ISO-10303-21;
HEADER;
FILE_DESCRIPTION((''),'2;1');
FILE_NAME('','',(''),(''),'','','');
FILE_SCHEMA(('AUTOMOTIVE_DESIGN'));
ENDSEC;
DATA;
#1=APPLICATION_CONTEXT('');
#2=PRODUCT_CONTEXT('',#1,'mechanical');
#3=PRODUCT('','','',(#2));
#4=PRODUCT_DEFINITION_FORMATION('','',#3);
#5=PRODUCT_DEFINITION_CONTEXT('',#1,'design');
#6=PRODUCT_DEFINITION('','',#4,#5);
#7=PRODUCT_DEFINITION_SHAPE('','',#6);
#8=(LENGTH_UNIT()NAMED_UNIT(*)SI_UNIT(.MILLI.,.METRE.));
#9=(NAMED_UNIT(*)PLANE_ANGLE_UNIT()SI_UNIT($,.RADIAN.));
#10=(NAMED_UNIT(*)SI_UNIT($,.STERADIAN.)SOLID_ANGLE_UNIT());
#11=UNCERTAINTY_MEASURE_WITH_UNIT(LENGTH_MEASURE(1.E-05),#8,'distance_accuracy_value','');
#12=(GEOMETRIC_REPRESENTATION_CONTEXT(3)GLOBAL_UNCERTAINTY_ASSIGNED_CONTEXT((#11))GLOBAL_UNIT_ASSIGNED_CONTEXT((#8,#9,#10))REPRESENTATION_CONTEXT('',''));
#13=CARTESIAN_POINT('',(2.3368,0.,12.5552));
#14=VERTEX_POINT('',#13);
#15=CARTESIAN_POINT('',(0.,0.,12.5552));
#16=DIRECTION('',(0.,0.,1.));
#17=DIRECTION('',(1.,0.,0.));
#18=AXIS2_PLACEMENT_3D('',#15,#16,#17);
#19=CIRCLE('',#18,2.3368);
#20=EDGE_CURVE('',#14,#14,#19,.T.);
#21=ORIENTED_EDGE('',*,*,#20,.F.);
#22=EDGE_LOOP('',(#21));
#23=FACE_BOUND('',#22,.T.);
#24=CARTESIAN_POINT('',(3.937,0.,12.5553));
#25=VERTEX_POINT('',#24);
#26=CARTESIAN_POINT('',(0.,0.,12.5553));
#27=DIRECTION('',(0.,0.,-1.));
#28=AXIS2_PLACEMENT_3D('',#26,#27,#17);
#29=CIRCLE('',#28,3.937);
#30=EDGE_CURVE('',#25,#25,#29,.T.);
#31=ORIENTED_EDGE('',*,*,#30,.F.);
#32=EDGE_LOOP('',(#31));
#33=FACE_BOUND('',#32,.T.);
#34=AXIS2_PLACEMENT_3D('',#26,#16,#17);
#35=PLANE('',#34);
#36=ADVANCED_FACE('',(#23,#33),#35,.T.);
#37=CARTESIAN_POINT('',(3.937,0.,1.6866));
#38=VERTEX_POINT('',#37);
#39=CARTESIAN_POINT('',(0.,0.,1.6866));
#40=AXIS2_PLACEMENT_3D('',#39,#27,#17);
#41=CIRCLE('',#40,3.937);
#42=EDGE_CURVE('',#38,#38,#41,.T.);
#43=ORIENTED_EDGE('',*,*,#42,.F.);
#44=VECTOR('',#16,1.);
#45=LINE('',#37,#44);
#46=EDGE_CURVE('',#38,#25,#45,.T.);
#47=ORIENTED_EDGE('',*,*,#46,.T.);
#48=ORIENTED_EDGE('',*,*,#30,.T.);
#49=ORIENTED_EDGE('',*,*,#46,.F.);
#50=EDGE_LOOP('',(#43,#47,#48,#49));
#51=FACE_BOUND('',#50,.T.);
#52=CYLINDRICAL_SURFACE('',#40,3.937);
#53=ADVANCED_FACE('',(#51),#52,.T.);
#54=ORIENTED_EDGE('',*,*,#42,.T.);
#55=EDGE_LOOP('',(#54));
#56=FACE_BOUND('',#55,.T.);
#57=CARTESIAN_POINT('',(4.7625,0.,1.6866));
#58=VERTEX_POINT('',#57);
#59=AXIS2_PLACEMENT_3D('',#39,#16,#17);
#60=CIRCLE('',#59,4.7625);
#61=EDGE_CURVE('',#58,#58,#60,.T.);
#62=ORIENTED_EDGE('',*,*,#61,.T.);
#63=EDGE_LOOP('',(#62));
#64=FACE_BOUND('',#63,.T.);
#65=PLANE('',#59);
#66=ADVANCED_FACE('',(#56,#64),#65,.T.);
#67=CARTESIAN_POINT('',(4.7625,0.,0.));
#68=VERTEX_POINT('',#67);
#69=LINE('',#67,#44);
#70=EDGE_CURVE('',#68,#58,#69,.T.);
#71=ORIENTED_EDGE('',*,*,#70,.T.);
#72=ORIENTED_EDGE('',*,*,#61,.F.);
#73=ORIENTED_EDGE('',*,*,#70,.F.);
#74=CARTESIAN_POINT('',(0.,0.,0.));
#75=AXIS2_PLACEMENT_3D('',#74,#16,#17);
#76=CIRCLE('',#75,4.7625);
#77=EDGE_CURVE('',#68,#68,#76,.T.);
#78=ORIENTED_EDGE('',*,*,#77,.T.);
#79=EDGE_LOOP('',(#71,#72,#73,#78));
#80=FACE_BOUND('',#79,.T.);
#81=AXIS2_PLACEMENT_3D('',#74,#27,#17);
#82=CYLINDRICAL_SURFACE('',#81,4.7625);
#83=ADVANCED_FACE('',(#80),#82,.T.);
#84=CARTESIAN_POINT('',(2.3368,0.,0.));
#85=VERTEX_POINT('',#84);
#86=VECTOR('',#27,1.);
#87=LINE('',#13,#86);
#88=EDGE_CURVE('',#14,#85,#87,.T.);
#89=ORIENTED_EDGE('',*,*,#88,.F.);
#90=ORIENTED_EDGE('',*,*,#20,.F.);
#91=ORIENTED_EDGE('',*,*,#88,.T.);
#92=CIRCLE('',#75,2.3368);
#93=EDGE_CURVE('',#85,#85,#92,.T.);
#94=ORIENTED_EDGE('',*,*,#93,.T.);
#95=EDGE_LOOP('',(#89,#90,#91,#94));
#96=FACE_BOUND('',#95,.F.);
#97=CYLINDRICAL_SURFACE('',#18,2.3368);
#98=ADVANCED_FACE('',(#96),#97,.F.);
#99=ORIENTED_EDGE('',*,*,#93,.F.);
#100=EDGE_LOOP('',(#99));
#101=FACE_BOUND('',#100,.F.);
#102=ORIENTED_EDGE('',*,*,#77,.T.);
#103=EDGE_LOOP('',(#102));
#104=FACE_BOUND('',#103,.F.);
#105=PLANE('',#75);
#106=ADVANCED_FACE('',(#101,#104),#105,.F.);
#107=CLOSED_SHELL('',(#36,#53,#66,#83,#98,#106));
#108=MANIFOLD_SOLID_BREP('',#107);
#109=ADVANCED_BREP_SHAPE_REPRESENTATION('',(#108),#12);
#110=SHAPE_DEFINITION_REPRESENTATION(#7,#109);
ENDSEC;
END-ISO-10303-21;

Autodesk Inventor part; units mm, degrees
ref_plane "YZ Plane" through (0, 0, 0) normal (1, 0, 0) x (0, 1, 0)
ref_plane "XZ Plane" through (0, 0, 0) normal (0, 1, 0) x (-1, 0, 0)
ref_plane "XY Plane" through (0, 0, 0) normal (0, 0, 1) x (1, 0, 0)
sketch "Sketch1" plane through (0, 0, 0) normal (0, 0, 1) x (1, 0, 0)
  circle A0 centre (0, 0) radius 4.7625
  dimension "d0" = 9.525
extrude "Extrusion1" add sketch "Sketch1" along normal blind 1.6866
sketch "Sketch2" plane through (0, 0, 1.6866) normal (0, 0, 1) x (1, 0, 0)
  circle A0 centre (0, 0) radius 4.7625 projected
  line L0 (-4.7625, 0) -> (-3.937, 0)
  circle A1 centre (0, 0) radius 3.937
  dimension "d3" = 0.8255
extrude "Extrusion2" add sketch "Sketch2" along normal blind 10.8687 contours A1
sketch "Sketch3" plane through (0, 0, 12.5552) normal (0, 0, 1) x (1, 0, 0)
  circle A0 centre (0, 0) radius 2.3368
  dimension "d6" = 4.6736
extrude "Extrusion3" cut sketch "Sketch3" against normal blind 31.9938
properties part number "Bushing" material "Copper, Cast"
